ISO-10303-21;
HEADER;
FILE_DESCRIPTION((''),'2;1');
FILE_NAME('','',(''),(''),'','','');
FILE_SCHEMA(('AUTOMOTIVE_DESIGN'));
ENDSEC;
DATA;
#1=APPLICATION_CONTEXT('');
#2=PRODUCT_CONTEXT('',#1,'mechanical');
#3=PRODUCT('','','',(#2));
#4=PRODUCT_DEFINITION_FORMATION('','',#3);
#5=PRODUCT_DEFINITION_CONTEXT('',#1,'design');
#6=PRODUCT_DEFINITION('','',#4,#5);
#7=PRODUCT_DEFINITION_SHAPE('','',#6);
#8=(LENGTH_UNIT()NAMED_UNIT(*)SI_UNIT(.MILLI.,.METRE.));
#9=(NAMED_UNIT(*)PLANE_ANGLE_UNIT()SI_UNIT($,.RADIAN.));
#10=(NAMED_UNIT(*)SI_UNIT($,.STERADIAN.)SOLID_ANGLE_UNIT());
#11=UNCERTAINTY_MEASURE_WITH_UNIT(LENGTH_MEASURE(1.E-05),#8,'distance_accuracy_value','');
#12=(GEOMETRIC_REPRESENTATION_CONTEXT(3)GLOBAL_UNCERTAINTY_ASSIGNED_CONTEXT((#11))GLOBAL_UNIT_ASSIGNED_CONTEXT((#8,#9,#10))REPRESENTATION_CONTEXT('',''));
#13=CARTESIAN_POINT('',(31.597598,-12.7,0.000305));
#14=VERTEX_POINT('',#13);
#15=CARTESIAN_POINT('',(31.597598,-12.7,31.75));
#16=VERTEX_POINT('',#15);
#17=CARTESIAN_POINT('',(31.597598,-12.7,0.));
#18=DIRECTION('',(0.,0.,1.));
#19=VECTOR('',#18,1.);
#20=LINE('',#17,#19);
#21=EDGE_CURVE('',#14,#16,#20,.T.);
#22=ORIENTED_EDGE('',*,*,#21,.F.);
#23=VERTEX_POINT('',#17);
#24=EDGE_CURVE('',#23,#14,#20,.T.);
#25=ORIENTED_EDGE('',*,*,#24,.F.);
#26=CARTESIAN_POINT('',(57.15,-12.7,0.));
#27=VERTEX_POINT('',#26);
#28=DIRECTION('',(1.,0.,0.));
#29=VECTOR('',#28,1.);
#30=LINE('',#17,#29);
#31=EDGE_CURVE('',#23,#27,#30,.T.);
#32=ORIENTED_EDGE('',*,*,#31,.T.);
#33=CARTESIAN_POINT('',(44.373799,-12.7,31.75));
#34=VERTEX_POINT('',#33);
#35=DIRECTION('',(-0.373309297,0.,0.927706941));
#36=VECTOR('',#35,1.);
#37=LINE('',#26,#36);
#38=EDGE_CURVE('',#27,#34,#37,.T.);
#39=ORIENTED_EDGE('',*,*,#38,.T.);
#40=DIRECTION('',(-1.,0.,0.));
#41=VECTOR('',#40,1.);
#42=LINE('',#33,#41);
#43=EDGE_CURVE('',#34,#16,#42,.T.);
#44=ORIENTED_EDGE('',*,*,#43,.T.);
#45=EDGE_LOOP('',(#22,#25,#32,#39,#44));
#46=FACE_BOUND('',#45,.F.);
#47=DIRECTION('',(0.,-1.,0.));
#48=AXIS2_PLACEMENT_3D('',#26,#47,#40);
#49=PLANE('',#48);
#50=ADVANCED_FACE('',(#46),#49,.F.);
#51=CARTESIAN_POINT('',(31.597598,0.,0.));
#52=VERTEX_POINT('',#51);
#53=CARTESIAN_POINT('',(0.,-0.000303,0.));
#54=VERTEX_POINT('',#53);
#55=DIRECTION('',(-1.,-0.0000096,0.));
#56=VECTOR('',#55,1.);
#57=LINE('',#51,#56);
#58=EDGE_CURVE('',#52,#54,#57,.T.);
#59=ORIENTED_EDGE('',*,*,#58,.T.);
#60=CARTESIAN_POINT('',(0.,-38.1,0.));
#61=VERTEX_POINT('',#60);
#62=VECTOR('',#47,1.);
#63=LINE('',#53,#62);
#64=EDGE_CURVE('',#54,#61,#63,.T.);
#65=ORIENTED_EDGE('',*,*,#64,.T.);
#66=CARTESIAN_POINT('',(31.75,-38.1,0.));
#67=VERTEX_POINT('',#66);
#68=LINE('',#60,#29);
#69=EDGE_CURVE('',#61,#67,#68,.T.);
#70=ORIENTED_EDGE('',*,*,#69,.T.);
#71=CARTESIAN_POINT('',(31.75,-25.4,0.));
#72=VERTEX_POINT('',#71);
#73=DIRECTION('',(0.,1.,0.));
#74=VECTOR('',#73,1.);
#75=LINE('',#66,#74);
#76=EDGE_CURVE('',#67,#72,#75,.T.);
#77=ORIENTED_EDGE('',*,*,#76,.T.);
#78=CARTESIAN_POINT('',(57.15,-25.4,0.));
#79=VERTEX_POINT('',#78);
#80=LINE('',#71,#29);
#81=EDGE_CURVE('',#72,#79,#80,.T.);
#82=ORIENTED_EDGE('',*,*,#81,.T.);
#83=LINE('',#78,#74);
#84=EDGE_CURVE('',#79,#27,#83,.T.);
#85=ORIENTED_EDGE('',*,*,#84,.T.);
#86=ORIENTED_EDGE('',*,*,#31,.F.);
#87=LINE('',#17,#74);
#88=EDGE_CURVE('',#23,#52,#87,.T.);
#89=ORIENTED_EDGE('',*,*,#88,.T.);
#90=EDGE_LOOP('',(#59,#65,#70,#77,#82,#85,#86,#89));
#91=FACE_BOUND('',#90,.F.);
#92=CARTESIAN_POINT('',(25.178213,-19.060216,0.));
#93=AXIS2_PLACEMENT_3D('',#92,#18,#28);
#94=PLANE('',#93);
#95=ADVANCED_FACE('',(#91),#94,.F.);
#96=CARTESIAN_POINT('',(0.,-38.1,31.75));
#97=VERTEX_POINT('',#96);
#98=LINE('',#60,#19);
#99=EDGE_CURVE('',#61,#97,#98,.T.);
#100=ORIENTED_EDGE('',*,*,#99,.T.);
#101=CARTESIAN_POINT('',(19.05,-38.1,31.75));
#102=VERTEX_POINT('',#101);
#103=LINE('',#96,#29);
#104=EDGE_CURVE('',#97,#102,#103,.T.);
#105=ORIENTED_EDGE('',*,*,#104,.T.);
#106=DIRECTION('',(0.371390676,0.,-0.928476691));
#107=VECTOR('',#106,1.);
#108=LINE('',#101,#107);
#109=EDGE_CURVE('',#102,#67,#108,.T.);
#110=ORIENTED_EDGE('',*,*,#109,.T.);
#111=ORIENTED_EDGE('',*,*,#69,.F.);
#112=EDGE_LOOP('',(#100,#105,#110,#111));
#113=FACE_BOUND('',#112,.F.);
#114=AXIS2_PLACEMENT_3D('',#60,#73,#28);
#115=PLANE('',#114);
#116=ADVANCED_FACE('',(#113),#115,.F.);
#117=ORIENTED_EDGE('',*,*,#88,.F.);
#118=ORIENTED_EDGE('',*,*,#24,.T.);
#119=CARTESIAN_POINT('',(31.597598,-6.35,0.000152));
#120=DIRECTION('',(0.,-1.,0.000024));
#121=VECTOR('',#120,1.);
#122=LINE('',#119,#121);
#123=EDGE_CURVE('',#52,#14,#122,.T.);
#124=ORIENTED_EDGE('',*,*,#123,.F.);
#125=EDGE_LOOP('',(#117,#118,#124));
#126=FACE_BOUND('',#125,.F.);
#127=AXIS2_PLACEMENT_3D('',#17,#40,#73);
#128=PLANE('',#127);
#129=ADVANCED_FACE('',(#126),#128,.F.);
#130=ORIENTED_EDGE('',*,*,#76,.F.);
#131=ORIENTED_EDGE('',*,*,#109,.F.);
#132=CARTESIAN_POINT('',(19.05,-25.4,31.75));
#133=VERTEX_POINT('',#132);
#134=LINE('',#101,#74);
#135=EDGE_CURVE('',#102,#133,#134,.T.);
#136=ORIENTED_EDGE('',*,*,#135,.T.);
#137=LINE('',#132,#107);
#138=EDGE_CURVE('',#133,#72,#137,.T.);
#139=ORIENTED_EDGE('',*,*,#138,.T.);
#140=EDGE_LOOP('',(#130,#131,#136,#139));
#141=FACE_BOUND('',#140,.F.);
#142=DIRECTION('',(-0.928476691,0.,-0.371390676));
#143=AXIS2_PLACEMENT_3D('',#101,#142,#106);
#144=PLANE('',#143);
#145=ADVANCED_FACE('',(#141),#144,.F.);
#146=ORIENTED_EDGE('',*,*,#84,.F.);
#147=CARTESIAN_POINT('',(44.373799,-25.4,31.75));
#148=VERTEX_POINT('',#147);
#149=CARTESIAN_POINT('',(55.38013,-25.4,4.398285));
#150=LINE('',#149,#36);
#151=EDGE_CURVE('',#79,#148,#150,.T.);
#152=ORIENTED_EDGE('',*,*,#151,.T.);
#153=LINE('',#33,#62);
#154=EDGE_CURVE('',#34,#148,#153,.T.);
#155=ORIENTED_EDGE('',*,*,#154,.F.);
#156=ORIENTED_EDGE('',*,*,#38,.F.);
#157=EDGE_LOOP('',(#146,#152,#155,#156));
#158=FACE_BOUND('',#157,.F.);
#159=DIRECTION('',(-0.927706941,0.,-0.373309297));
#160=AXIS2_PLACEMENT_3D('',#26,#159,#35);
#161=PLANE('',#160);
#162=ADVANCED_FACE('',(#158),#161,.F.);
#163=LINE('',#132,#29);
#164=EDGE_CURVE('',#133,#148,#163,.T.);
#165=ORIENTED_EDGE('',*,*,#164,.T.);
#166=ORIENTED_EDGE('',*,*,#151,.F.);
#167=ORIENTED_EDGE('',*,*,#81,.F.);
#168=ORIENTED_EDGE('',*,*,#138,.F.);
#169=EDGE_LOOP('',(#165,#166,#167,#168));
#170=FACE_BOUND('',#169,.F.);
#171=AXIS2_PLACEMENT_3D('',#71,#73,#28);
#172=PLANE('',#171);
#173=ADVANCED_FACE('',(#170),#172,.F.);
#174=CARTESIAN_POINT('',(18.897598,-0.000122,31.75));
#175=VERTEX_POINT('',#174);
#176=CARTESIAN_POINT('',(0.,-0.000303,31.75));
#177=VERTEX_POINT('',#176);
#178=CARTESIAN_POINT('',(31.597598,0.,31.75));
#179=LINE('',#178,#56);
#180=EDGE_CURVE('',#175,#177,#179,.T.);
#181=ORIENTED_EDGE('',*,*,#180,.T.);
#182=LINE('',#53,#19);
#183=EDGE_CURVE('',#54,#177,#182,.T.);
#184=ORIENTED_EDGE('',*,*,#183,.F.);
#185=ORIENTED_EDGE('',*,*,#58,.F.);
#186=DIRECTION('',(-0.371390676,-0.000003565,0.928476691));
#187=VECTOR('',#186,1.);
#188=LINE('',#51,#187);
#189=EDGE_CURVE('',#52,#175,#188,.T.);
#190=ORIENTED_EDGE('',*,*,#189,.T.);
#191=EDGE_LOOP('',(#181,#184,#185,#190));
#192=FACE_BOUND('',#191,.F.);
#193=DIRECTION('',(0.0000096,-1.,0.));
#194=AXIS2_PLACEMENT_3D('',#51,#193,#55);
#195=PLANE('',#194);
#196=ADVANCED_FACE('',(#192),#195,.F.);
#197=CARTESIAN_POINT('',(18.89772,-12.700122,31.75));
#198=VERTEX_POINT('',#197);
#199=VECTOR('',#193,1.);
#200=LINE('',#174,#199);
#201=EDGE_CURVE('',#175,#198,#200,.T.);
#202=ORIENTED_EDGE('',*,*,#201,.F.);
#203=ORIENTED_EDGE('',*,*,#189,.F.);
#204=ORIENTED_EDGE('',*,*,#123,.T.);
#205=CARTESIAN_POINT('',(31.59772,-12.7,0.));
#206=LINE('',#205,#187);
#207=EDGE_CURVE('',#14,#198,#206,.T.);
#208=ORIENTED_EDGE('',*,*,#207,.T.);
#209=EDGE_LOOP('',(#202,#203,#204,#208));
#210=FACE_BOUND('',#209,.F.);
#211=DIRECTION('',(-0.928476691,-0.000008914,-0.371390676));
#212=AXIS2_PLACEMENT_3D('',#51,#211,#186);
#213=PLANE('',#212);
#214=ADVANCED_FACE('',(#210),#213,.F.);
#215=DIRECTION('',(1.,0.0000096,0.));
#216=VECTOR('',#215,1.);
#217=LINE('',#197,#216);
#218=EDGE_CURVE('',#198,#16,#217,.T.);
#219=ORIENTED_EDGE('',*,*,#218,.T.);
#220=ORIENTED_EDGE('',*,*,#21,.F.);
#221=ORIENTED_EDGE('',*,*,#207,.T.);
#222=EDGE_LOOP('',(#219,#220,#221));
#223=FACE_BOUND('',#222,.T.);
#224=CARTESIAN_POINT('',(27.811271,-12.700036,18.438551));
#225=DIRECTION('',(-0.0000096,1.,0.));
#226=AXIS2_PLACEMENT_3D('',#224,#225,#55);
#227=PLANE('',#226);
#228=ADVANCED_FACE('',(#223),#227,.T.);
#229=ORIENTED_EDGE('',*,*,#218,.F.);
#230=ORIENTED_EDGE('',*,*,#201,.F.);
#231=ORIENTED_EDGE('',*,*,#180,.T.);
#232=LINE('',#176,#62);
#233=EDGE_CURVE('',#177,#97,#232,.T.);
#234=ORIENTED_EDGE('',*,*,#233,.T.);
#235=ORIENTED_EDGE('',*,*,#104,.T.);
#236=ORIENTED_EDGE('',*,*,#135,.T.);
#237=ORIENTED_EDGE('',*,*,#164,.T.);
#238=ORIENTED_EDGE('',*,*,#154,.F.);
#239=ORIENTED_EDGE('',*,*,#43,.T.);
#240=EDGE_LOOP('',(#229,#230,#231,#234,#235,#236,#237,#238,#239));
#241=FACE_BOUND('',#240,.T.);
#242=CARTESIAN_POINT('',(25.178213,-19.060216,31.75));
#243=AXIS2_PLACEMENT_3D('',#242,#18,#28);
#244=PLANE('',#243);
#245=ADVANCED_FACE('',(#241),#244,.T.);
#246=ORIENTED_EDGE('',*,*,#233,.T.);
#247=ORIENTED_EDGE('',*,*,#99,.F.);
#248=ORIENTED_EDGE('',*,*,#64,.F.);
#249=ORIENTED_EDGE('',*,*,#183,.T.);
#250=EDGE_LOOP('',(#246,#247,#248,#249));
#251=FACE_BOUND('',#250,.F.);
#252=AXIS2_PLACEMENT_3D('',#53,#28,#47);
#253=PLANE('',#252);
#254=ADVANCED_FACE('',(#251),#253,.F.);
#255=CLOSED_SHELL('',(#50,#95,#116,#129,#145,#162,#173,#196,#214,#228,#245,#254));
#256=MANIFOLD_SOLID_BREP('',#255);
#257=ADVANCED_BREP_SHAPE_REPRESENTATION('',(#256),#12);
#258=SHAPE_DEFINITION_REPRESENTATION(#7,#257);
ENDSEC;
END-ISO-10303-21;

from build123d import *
from build123d import SkipClean  # not in build123d's __all__

# Parameters (mm, degrees)
F1_DEPTH = 31.75
F3_DEPTH = 12.7
F5_DEPTH = 12.7
F7_DEPTH = 25.401


with BuildPart() as f1:
    # F0 (on Top) → F1 (new body)
    with BuildSketch(Plane.XY):
        Polygon((31.597598396, 0), (0, -0.0003033445), (0, -38.1), (31.75, -38.1), (31.75, -25.4), (57.15, -25.4), (57.15, -12.7), (31.597598396, -12.7), align=None)
    extrude(amount=F1_DEPTH)

    # F2 (on face) → F3 (cut)
    with BuildSketch(Plane.XZ.offset(38.1)):
        Polygon((31.75, 0), (31.75, 31.75), (19.05, 31.75), align=None)
    extrude(amount=-F3_DEPTH, mode=Mode.SUBTRACT)

    # F4 (on face) → F5 (cut)
    with BuildSketch(Plane(origin=(2.9e-09, -0.0003033445, 0), x_dir=(-1, -9.6002e-06, 0), z_dir=(-9.6002e-06, 1, 0))):
        Polygon((-18.8975983945, 31.75), (-31.5975983945, 31.75), (-31.5975983945, 0), align=None)
    with SkipClean():  # cleaning this boolean's faces spoils the solid; the shape is the same uncleaned
        extrude(amount=-F5_DEPTH, mode=Mode.SUBTRACT)

    # F6 (on face) → F7 (cut, through all)
    with BuildSketch(Plane(origin=(0, -12.7, 0), x_dir=(-1, 0, 0), z_dir=(0, 1, 0))):
        Polygon((-44.373799198, 31.75), (-57.15, 31.75), (-57.15, 0), align=None)
    extrude(amount=-F7_DEPTH, mode=Mode.SUBTRACT)


solid = f1.part
